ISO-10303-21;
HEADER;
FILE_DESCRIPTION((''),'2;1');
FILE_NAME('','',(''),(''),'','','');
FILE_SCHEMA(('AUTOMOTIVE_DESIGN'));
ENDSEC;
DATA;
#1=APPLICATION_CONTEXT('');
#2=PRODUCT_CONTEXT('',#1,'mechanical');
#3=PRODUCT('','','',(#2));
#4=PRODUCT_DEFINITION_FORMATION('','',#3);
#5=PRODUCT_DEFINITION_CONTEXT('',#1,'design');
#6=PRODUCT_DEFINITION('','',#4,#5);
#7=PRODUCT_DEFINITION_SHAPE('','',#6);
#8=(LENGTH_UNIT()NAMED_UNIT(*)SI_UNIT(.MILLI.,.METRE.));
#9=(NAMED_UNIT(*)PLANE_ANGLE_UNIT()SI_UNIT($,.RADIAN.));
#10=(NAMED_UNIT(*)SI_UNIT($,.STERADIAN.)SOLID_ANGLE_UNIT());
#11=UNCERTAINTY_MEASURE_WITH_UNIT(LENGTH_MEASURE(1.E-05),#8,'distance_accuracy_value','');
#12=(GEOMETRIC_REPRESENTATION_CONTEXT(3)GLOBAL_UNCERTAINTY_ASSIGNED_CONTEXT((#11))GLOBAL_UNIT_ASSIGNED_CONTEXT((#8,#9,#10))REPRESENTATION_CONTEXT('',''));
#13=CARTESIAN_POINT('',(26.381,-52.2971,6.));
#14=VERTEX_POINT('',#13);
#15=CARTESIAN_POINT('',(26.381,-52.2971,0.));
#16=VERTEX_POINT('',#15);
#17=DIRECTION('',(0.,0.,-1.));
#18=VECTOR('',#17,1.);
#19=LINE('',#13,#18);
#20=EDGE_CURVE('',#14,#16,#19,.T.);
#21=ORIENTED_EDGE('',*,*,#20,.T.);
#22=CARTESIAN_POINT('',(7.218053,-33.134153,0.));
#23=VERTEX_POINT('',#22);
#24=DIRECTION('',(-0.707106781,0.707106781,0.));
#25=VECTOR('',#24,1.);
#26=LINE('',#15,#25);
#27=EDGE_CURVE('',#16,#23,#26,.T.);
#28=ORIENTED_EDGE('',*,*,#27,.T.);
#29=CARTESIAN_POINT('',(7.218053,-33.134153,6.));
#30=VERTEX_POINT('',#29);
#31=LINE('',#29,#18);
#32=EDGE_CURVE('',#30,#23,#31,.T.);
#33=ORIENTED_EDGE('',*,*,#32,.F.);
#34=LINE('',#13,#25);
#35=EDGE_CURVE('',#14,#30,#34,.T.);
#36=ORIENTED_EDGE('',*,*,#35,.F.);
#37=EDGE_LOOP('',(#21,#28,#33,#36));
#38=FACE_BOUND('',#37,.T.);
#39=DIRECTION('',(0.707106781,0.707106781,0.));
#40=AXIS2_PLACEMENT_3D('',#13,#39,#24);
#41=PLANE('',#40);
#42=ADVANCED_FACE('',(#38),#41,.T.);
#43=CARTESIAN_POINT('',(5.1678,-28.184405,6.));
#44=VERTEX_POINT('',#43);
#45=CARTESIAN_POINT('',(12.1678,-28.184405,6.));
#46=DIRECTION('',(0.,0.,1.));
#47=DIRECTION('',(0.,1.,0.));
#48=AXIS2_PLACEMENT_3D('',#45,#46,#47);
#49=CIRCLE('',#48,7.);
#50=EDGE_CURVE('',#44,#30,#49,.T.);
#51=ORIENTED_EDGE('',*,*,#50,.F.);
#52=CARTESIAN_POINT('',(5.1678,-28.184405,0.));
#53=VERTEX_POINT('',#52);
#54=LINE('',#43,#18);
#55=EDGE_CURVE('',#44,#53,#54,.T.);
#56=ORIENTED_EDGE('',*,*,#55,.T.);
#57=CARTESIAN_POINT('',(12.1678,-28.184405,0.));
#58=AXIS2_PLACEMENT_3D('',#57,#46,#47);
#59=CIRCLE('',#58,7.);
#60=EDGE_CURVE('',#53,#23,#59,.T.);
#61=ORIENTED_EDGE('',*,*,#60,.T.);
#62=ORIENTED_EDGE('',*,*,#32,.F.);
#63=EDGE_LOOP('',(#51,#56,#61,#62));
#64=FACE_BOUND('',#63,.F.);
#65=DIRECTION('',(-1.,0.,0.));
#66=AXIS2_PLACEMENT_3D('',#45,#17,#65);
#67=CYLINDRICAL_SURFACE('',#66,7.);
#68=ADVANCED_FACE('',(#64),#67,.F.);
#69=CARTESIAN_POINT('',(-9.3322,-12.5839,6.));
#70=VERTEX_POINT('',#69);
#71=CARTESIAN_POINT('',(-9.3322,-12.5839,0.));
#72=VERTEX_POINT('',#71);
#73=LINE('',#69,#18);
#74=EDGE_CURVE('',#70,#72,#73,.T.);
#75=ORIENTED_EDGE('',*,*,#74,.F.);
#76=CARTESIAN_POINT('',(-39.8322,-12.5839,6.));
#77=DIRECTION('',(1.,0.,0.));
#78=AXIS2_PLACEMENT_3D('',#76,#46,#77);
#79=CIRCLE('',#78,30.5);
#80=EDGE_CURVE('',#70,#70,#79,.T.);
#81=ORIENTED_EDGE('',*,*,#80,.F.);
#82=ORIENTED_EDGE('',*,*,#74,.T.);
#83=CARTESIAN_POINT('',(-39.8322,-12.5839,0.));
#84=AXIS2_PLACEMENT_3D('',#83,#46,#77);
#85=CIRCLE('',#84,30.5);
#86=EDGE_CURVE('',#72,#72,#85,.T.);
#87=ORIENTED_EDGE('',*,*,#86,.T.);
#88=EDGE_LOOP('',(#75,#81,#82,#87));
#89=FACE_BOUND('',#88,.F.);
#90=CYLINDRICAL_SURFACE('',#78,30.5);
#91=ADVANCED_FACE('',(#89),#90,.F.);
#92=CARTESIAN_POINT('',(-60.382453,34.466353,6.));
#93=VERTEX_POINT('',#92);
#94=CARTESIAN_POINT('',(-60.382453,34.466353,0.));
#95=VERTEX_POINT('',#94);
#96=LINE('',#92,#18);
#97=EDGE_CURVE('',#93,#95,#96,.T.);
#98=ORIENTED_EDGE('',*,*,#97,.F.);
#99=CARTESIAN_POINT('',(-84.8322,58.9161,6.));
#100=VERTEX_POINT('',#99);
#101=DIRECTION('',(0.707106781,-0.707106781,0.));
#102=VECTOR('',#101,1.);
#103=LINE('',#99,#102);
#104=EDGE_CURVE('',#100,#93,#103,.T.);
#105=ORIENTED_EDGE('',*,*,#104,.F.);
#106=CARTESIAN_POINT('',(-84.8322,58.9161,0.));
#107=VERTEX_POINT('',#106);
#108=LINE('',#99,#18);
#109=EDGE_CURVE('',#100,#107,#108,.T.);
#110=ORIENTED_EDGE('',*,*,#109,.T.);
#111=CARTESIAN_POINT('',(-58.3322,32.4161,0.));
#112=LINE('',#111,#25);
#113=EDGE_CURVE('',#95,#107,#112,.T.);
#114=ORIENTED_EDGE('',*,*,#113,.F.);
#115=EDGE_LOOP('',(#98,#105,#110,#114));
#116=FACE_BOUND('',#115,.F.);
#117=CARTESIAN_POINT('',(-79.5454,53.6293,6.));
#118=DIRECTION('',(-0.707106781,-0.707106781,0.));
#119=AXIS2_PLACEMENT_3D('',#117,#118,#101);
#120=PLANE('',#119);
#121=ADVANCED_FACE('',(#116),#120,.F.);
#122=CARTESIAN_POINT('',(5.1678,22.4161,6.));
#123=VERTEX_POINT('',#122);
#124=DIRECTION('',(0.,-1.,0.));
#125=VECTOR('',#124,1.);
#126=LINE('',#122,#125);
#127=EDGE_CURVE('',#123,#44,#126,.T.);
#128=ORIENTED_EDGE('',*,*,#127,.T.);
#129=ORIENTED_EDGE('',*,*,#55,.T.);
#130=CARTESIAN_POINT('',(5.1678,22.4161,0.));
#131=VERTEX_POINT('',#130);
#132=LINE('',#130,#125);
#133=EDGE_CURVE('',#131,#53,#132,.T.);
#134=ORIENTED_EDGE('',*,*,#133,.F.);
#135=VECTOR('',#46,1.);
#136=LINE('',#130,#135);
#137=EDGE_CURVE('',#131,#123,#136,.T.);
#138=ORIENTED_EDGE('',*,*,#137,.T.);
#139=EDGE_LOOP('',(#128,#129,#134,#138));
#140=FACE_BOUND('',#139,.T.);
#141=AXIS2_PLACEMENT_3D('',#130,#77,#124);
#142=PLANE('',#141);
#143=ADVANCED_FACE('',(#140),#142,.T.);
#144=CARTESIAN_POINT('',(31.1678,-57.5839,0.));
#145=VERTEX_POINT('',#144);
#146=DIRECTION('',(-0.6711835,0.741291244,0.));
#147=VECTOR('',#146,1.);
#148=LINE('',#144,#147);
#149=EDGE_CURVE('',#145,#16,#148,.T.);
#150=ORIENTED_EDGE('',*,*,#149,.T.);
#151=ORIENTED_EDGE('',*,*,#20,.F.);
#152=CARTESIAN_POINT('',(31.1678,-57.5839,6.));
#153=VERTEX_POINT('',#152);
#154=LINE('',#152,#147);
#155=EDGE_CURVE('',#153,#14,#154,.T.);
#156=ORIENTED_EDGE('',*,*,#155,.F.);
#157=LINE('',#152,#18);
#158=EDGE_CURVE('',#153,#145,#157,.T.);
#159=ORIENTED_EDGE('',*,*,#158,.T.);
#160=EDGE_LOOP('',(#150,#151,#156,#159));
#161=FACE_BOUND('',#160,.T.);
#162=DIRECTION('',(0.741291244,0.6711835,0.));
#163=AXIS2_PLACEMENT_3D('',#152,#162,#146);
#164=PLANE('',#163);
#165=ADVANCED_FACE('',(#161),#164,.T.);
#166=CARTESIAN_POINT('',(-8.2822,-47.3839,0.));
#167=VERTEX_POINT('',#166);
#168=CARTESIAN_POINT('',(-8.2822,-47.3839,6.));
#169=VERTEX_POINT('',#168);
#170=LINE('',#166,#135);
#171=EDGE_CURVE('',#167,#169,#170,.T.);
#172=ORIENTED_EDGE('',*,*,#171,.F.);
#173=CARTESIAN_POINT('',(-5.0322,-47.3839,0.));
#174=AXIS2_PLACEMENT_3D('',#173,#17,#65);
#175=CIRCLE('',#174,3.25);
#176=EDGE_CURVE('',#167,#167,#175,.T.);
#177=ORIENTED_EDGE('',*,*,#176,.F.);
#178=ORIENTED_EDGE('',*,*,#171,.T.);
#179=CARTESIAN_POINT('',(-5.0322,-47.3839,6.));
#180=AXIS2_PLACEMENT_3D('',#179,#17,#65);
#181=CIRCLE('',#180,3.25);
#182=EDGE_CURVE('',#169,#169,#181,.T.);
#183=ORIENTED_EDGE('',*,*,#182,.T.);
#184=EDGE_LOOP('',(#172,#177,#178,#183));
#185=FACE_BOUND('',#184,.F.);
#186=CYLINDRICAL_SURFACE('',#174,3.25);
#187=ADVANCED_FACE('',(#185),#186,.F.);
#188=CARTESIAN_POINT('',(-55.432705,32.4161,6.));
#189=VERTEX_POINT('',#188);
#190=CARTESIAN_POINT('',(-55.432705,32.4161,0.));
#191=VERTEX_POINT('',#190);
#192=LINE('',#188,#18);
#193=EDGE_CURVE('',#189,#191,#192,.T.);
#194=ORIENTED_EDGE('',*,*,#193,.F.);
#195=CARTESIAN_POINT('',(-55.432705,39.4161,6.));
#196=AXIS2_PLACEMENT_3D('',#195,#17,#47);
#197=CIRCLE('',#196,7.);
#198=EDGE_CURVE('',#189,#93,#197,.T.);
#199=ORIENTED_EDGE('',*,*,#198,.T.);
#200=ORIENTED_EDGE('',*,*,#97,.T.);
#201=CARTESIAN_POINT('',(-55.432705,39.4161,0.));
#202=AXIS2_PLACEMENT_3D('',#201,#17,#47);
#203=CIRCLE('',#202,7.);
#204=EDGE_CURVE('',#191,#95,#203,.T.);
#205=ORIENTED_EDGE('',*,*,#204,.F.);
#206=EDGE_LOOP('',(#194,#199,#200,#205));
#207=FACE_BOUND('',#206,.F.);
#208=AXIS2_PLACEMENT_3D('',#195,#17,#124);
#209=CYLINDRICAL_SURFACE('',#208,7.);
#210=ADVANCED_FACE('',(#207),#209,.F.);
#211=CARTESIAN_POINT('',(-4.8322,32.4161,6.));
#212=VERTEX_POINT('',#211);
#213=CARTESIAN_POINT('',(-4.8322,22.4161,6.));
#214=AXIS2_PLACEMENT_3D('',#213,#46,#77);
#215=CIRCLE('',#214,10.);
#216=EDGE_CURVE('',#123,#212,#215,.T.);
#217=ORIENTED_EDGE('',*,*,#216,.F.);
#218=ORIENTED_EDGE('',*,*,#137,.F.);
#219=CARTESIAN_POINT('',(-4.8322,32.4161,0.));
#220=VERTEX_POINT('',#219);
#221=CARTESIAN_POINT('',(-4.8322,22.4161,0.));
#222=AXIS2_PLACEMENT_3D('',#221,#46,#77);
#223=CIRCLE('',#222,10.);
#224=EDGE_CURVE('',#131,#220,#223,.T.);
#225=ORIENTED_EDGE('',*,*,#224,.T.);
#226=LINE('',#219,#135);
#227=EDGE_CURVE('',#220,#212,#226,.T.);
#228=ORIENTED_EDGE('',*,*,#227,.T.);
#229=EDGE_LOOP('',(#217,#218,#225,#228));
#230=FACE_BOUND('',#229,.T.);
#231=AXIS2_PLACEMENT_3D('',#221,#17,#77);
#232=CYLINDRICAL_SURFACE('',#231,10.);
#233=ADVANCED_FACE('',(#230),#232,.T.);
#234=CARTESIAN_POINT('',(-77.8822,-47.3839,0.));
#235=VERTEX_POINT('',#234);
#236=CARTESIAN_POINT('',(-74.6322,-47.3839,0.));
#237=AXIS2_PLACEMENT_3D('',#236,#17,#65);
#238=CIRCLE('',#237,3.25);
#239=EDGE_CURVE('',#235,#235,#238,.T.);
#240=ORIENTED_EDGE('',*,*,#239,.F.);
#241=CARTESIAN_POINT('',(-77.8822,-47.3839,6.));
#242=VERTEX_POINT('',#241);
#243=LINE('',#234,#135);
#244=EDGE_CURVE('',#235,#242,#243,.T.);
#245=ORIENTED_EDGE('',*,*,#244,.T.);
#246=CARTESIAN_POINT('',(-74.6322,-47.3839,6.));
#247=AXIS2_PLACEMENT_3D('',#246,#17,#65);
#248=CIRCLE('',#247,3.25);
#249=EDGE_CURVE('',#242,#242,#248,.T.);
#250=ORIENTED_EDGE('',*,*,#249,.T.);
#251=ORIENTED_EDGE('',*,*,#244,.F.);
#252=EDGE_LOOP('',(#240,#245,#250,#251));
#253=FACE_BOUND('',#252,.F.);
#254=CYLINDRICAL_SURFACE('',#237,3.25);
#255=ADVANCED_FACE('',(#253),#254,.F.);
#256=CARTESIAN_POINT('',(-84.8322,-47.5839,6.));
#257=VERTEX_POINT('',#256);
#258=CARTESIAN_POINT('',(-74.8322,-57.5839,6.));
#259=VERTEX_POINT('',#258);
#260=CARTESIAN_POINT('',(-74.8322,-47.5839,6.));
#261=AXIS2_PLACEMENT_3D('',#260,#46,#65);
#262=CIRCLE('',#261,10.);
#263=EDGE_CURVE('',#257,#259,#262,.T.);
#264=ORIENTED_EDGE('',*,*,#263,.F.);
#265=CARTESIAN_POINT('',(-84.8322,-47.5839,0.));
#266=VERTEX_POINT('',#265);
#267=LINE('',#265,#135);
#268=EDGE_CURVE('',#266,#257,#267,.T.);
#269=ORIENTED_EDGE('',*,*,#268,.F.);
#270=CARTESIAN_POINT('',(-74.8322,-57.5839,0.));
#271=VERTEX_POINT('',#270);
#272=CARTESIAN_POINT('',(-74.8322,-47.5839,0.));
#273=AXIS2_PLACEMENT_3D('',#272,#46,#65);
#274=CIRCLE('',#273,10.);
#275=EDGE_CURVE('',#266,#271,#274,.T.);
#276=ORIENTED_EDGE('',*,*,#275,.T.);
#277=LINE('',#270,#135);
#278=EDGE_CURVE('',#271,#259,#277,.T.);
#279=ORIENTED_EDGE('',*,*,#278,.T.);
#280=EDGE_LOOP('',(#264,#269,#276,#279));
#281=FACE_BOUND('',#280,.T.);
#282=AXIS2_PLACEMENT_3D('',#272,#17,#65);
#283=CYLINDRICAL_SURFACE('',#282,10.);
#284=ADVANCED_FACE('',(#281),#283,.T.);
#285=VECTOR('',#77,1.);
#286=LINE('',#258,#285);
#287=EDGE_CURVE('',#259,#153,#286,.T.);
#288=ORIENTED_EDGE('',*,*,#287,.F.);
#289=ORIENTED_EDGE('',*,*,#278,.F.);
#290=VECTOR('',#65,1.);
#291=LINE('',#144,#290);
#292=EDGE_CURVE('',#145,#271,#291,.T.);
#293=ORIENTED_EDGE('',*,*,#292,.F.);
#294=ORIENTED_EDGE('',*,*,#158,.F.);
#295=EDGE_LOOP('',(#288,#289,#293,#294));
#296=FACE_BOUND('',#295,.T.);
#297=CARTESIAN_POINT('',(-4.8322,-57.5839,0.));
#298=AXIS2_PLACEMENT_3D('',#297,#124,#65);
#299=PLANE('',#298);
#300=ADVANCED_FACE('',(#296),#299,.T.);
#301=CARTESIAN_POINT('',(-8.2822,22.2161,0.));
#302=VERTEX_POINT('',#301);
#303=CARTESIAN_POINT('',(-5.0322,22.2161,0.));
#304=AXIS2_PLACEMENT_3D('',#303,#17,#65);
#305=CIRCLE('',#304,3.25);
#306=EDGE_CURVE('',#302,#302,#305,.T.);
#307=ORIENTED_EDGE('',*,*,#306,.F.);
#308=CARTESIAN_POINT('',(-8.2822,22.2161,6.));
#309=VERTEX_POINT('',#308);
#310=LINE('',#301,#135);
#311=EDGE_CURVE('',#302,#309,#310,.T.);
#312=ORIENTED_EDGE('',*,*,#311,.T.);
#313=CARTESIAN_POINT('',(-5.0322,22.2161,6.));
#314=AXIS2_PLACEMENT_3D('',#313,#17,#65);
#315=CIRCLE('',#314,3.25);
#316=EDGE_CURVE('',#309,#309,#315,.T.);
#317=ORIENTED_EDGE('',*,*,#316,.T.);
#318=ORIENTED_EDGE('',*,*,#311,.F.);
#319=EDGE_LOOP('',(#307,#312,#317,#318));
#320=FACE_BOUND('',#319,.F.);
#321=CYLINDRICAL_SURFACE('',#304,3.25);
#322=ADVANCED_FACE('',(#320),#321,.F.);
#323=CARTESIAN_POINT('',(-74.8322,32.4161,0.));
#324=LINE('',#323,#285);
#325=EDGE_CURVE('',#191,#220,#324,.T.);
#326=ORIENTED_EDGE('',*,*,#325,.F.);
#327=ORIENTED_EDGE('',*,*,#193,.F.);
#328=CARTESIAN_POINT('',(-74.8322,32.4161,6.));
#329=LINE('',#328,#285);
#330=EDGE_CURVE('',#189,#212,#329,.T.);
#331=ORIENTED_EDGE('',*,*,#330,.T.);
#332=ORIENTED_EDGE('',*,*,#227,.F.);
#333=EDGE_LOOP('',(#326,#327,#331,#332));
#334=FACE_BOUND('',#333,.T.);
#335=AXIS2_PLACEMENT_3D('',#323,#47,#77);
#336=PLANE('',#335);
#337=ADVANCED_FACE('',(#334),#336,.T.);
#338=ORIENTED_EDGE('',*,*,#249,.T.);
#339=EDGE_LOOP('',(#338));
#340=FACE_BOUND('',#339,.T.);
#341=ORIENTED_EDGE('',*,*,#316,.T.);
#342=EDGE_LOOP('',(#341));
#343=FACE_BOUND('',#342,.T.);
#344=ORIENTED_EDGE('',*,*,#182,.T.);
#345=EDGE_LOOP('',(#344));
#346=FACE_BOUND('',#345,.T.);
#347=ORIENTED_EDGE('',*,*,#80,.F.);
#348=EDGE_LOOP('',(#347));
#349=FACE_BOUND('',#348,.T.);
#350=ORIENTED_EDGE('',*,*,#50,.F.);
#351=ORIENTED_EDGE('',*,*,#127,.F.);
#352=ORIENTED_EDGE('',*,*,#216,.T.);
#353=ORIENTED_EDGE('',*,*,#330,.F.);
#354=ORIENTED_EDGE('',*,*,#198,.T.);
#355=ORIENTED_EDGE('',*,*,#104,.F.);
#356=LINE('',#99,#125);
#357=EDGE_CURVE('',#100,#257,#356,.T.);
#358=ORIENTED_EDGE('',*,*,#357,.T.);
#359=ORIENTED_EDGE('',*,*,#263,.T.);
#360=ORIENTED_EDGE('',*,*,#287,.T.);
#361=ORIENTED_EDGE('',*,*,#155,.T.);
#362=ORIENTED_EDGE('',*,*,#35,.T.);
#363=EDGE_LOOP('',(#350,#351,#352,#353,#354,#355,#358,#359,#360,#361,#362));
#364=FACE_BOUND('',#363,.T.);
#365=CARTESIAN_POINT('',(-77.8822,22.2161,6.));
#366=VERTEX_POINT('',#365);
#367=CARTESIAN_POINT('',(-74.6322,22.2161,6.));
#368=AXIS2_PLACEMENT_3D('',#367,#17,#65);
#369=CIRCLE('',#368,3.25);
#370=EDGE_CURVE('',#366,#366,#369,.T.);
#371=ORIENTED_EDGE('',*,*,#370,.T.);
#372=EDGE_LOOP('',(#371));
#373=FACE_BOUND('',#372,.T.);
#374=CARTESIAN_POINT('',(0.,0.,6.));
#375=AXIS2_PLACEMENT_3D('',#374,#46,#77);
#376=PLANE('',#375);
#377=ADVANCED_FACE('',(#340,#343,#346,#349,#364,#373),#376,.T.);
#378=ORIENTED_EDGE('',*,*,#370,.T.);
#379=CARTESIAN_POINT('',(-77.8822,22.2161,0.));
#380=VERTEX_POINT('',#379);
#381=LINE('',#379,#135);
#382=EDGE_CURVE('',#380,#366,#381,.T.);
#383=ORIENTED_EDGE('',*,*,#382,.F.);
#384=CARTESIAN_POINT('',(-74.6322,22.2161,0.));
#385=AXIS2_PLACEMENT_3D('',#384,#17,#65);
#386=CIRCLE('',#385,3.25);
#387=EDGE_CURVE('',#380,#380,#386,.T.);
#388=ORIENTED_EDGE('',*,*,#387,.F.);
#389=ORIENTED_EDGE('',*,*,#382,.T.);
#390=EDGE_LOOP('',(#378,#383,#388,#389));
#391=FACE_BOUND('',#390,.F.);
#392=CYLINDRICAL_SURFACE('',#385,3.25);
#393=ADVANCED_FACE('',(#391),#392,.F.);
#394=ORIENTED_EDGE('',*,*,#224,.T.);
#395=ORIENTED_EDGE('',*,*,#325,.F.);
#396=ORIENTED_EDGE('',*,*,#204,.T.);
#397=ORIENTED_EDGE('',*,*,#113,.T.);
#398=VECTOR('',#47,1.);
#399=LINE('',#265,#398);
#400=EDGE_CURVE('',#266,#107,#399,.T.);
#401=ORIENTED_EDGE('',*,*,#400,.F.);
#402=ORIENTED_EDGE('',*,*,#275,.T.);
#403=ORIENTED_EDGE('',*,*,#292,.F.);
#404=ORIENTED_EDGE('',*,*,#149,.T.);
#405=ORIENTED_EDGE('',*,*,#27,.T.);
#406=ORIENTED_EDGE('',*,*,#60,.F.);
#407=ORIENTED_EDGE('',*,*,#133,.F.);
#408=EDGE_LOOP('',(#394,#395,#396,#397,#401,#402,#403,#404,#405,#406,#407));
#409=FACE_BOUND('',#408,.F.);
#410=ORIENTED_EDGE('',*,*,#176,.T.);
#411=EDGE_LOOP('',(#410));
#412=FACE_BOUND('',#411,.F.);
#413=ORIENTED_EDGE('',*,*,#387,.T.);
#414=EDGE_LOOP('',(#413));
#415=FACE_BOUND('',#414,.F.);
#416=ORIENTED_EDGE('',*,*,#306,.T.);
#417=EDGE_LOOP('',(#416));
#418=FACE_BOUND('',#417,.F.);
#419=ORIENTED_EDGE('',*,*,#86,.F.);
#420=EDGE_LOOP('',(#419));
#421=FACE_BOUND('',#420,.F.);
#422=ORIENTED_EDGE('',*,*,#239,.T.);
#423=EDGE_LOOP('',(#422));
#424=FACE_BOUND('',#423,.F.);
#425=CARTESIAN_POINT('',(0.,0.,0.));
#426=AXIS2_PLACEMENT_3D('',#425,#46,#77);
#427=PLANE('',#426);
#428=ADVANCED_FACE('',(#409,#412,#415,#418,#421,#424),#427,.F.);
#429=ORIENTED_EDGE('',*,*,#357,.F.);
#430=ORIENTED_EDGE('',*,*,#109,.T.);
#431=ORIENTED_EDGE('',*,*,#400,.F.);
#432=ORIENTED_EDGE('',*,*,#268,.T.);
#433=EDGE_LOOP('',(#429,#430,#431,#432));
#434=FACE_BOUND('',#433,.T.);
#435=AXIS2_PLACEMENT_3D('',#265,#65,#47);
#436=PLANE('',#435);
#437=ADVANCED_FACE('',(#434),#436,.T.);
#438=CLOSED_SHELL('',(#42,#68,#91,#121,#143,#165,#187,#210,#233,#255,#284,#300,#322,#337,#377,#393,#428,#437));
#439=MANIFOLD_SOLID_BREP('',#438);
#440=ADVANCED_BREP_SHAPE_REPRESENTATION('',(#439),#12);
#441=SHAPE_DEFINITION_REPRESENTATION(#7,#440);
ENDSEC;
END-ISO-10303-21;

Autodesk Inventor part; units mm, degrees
ref_plane "YZ Plane" through (0, 0, 0) normal (1, 0, 0) x (0, 1, 0)
ref_plane "XZ Plane" through (0, 0, 0) normal (0, 1, 0) x (-1, 0, 0)
ref_plane "XY Plane" through (0, 0, 0) normal (0, 0, 1) x (1, 0, 0)
sketch "Sketch1" plane through (0, 0, 0) normal (0, 0, 1) x (1, 0, 0)
  line L0 (-74.8322, 32.4161) -> (-4.8322, 32.4161)
  line L1 (5.1678, 22.4161) -> (5.1678, -47.5839)
  line L2 (-4.8322, -57.5839) -> (-74.8322, -57.5839)
  line L3 (-84.8322, -47.5839) -> (-84.8322, 22.4161)
  arc A0 (-74.8322, 32.4161) -> (-84.8322, 22.4161) centre (-74.8322, 22.4161) ccw
  arc A1 (5.1678, 22.4161) -> (-4.8322, 32.4161) centre (-4.8322, 22.4161) ccw
  arc A2 (-4.8322, -57.5839) -> (5.1678, -47.5839) centre (-4.8322, -47.5839) ccw
  arc A3 (-84.8322, -47.5839) -> (-74.8322, -57.5839) centre (-74.8322, -47.5839) ccw
  point P0 (0, 0)
  point P1 (-84.8322, 32.4161)
  point P2 (5.1678, 32.4161)
  point P3 (-84.8322, -57.5839)
  dimension "d0" = 90
  dimension "d1" = 90
  dimension "d2" = 10
extrude "Extrusion1" add sketch "Sketch1" along normal blind 6
sketch "Sketch2" plane through (0, 0, 6) normal (0, 0, 1) x (1, 0, 0)
  line L0 (-84.8322, -47.5839) -> (-84.8322, 22.4161) projected
  line L1 (-84.8322, -12.5839) -> (5.1678, -12.5839) construction
  line L2 (5.1678, 22.4161) -> (5.1678, -47.5839) projected
  circle A0 centre (-39.8322, -12.5839) radius 30.5
  point P0 (0, 0)
  dimension "d5" = 61
extrude "Extrusion2" cut sketch "Sketch2" against normal through all
sketch "Sketch3" plane through (0, 0, 6) normal (0, 0, 1) x (1, 0, 0)
  line L0 (5.1678, -47.5839) -> (5.1678, 22.4161) projected
  line L1 (5.1678, -12.5839) -> (30.1678, -12.5839) construction
  line L2 (26.381, -52.2971) -> (5.1678, -31.0839)
  circle A0 centre (-39.8322, -12.5839) radius 30.5 projected
  line L3 (-39.8322, -12.5839) -> (-18.2655, 8.9829) construction
  line L4 (-79.5454, 53.6293) -> (-58.3322, 32.4161)
  line L5 (-74.8322, -57.5839) -> (-4.8322, -57.5839) projected
  line L6 (-4.8322, -57.5839) -> (31.1678, -57.5839)
  line L7 (31.1678, -57.5839) -> (26.381, -52.2971)
  arc A1 (-74.8322, 32.4161) -> (-84.8322, 22.4161) centre (-74.8322, 22.4161) ccw projected
  line L8 (-84.8322, 22.4161) -> (-84.8322, 58.9161)
  line L9 (-84.8322, 58.9161) -> (-79.5454, 53.6293)
  line L10 (-4.8322, 32.4161) -> (-74.8322, 32.4161) projected
  line L11 (-58.3322, 32.4161) -> (-74.8322, 32.4161)
  arc A2 (-4.8322, -57.5839) -> (5.1678, -47.5839) centre (-4.8322, -47.5839) ccw projected
  line L12 (5.1678, -31.0839) -> (5.1678, -47.5839)
  point P0 (0, 0)
  dimension "d13" = 53.5
extrude "Extrusion3" add sketch "Sketch3" against normal up to surface (6 mm away) contours L0 L2 L7 L6 A2 | L4 L10 A1 L8 L9
fillet "Fillet1" radius 7 2 edges at (-58.3322, 32.4161, 3) (5.1678, -31.0839, 3)
sketch "Sketch4" plane through (0, 0, 0) normal (0, 0, -1) x (-1, 0, 0)
  circle A0 centre (74.6322, 22.2161) radius 3.25 projected
  circle A1 centre (74.6322, -47.3839) radius 3.25 projected
  circle A2 centre (5.0322, -47.3839) radius 3.25 projected
  circle A3 centre (5.0322, 22.2161) radius 3.25 projected
  point P0 (0, 0)
extrude "Extrusion4" cut sketch "Sketch4" against normal through all
properties part number "Motor support"
